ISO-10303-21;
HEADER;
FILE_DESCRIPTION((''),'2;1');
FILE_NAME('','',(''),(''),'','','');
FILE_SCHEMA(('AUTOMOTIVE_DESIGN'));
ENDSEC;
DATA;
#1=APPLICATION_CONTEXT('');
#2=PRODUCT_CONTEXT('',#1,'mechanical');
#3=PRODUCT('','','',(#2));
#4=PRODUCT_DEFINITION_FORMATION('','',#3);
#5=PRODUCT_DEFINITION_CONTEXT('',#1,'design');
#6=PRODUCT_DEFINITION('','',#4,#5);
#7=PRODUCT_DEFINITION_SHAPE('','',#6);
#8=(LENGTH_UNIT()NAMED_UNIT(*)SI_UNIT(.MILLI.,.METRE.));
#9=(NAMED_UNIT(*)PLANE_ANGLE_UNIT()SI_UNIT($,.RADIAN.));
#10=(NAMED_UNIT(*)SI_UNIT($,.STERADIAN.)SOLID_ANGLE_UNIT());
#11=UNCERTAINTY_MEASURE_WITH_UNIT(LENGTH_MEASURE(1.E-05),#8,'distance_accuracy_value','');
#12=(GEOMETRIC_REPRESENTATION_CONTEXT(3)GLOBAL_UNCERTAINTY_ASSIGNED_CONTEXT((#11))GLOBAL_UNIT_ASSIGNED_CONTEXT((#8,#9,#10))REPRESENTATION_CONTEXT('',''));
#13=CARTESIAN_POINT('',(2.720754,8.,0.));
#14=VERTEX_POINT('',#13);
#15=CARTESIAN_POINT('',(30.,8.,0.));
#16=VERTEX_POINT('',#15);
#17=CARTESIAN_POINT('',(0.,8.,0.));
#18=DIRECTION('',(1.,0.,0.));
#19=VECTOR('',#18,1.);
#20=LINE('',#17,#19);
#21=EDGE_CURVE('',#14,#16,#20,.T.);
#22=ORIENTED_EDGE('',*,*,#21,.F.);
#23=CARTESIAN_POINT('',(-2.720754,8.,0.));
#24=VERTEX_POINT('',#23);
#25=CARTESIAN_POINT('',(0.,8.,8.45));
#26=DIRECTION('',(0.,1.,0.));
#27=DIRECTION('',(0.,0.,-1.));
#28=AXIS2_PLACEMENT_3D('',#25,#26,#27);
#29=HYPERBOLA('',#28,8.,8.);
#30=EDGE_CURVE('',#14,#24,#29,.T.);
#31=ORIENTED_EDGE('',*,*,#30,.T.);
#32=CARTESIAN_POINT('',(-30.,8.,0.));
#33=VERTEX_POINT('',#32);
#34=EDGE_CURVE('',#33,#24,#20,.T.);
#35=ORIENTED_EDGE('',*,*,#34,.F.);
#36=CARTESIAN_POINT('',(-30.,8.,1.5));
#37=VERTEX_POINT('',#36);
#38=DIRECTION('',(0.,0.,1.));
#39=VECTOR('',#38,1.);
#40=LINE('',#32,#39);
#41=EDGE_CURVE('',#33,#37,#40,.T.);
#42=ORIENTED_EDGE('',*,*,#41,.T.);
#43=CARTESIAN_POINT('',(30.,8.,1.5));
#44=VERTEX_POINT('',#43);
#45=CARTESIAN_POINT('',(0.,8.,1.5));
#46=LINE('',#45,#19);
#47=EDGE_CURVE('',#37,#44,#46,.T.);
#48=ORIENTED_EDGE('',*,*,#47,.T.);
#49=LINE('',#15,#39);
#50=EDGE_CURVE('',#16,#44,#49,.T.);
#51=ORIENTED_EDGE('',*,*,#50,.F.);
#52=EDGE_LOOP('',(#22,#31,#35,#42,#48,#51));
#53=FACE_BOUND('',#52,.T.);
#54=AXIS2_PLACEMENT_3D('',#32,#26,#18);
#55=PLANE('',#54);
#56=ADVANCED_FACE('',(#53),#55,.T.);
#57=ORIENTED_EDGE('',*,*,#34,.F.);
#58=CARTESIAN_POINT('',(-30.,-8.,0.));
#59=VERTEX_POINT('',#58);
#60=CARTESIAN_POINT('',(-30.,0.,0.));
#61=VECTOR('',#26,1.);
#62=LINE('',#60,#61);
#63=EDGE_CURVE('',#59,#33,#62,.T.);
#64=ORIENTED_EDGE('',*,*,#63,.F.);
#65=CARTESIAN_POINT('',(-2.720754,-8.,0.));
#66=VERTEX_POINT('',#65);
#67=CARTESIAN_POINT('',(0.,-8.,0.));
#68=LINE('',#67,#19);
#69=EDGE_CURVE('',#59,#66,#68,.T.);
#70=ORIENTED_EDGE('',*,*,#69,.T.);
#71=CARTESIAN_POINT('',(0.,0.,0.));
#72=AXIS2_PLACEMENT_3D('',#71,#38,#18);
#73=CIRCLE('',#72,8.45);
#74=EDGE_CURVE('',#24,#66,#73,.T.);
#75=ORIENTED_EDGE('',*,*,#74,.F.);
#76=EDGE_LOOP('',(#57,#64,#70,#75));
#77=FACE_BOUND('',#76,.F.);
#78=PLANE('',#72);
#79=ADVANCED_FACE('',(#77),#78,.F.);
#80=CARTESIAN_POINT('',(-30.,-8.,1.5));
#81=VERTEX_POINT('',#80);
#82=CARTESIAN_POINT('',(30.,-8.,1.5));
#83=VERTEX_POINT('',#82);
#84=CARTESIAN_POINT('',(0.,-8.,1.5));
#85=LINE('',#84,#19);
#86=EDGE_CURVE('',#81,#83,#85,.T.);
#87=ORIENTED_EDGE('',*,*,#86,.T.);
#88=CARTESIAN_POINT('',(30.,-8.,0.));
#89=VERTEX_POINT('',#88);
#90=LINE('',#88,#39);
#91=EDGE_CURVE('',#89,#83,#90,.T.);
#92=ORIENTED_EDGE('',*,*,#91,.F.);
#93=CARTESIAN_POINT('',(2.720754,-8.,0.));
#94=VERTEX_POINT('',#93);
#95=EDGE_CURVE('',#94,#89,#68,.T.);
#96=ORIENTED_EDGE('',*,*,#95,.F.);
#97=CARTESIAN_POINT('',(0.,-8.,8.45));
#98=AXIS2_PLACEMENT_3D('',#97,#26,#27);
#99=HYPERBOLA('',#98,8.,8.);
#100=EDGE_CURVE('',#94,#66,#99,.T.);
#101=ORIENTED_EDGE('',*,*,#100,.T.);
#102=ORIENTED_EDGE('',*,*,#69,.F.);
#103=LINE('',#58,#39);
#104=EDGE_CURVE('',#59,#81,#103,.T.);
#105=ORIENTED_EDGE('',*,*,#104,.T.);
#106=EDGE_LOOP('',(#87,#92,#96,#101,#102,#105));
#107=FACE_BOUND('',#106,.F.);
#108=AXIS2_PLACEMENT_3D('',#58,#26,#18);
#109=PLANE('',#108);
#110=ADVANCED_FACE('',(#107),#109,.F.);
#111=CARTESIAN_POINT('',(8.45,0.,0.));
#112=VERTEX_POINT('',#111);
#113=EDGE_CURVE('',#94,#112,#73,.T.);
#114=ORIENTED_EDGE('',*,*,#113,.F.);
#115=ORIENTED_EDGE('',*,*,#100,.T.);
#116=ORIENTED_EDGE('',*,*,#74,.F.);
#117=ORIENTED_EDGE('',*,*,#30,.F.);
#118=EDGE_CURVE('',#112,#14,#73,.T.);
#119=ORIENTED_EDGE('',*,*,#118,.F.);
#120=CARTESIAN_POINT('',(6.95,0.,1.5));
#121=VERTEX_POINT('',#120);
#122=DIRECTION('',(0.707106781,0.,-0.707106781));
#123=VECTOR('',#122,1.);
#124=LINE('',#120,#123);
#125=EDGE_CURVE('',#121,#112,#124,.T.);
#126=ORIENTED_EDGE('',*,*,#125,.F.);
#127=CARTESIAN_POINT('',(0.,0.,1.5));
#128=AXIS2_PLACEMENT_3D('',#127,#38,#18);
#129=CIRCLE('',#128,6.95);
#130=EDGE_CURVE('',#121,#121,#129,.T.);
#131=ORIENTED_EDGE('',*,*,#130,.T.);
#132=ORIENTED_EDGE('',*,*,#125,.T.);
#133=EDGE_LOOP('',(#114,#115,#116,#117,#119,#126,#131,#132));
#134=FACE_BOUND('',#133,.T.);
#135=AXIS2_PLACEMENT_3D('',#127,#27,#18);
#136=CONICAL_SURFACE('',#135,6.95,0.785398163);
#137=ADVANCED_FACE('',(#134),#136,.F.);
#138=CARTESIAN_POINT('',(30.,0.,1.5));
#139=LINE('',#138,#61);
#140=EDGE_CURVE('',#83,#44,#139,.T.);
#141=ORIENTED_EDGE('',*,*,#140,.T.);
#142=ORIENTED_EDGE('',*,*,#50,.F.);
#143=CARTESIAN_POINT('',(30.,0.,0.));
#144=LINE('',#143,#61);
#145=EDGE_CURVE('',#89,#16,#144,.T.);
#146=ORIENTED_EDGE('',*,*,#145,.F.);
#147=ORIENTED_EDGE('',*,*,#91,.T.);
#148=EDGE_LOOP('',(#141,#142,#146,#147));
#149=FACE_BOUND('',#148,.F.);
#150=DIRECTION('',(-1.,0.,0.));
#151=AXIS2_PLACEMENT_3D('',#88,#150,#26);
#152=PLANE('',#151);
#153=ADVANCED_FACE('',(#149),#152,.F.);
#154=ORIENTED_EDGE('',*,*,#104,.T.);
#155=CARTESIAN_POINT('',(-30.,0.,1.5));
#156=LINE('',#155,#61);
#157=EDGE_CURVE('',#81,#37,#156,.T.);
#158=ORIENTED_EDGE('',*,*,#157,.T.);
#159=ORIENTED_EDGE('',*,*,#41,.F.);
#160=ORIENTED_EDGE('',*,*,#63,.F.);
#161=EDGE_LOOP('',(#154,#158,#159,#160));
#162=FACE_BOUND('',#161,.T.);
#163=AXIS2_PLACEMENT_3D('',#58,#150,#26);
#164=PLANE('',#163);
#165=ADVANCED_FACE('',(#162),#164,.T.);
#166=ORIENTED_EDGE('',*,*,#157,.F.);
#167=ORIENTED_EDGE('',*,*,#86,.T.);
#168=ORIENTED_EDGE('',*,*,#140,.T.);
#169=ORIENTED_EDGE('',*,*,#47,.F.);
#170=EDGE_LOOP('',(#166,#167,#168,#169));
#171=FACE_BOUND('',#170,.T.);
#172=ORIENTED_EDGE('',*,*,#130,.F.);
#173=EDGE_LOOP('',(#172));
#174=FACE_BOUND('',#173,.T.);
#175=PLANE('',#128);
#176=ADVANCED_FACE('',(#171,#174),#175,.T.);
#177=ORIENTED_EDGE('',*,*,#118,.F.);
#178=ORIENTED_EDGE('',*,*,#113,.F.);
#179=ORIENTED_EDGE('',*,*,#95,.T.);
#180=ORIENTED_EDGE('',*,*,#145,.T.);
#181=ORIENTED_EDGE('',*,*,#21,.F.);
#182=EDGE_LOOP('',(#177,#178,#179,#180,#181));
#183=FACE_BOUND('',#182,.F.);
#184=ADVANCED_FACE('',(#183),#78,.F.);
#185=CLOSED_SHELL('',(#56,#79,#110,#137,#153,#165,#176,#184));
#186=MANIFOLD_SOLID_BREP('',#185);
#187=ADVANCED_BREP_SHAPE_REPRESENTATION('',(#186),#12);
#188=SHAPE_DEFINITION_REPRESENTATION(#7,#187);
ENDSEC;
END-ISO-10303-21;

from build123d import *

# Parameters (mm, degrees)
F0_W     = 60
F0_H     = 16
F0_R     = 6.95
F1_DEPTH = 1.5


# Not quite as in the source:
# - a fillet or chamfer that OpenCascade refuses, or shapes differently, is made with other operations: its cross-section is extruded or revolved along the edge and cut away or added


with BuildPart() as f1:
    # F0 (on Top) → F1 (new body)
    with BuildSketch(Plane.XY):
        Rectangle(F0_W, F0_H)
        Circle(F0_R, mode=Mode.SUBTRACT)
    extrude(amount=F1_DEPTH)

    # F2: chamfer of 1.5 on 1 edges, made by hand

    # F2_s1 → F2_t2 (revolve, cut)
    with BuildSketch(Plane.XZ):
        Polygon((6.95, 1.5), (8.45, 0), (6.95, 0), align=None)
    revolve(axis=Axis((0, 0, 0), (0, 0, 1)), mode=Mode.SUBTRACT)


solid = f1.part
